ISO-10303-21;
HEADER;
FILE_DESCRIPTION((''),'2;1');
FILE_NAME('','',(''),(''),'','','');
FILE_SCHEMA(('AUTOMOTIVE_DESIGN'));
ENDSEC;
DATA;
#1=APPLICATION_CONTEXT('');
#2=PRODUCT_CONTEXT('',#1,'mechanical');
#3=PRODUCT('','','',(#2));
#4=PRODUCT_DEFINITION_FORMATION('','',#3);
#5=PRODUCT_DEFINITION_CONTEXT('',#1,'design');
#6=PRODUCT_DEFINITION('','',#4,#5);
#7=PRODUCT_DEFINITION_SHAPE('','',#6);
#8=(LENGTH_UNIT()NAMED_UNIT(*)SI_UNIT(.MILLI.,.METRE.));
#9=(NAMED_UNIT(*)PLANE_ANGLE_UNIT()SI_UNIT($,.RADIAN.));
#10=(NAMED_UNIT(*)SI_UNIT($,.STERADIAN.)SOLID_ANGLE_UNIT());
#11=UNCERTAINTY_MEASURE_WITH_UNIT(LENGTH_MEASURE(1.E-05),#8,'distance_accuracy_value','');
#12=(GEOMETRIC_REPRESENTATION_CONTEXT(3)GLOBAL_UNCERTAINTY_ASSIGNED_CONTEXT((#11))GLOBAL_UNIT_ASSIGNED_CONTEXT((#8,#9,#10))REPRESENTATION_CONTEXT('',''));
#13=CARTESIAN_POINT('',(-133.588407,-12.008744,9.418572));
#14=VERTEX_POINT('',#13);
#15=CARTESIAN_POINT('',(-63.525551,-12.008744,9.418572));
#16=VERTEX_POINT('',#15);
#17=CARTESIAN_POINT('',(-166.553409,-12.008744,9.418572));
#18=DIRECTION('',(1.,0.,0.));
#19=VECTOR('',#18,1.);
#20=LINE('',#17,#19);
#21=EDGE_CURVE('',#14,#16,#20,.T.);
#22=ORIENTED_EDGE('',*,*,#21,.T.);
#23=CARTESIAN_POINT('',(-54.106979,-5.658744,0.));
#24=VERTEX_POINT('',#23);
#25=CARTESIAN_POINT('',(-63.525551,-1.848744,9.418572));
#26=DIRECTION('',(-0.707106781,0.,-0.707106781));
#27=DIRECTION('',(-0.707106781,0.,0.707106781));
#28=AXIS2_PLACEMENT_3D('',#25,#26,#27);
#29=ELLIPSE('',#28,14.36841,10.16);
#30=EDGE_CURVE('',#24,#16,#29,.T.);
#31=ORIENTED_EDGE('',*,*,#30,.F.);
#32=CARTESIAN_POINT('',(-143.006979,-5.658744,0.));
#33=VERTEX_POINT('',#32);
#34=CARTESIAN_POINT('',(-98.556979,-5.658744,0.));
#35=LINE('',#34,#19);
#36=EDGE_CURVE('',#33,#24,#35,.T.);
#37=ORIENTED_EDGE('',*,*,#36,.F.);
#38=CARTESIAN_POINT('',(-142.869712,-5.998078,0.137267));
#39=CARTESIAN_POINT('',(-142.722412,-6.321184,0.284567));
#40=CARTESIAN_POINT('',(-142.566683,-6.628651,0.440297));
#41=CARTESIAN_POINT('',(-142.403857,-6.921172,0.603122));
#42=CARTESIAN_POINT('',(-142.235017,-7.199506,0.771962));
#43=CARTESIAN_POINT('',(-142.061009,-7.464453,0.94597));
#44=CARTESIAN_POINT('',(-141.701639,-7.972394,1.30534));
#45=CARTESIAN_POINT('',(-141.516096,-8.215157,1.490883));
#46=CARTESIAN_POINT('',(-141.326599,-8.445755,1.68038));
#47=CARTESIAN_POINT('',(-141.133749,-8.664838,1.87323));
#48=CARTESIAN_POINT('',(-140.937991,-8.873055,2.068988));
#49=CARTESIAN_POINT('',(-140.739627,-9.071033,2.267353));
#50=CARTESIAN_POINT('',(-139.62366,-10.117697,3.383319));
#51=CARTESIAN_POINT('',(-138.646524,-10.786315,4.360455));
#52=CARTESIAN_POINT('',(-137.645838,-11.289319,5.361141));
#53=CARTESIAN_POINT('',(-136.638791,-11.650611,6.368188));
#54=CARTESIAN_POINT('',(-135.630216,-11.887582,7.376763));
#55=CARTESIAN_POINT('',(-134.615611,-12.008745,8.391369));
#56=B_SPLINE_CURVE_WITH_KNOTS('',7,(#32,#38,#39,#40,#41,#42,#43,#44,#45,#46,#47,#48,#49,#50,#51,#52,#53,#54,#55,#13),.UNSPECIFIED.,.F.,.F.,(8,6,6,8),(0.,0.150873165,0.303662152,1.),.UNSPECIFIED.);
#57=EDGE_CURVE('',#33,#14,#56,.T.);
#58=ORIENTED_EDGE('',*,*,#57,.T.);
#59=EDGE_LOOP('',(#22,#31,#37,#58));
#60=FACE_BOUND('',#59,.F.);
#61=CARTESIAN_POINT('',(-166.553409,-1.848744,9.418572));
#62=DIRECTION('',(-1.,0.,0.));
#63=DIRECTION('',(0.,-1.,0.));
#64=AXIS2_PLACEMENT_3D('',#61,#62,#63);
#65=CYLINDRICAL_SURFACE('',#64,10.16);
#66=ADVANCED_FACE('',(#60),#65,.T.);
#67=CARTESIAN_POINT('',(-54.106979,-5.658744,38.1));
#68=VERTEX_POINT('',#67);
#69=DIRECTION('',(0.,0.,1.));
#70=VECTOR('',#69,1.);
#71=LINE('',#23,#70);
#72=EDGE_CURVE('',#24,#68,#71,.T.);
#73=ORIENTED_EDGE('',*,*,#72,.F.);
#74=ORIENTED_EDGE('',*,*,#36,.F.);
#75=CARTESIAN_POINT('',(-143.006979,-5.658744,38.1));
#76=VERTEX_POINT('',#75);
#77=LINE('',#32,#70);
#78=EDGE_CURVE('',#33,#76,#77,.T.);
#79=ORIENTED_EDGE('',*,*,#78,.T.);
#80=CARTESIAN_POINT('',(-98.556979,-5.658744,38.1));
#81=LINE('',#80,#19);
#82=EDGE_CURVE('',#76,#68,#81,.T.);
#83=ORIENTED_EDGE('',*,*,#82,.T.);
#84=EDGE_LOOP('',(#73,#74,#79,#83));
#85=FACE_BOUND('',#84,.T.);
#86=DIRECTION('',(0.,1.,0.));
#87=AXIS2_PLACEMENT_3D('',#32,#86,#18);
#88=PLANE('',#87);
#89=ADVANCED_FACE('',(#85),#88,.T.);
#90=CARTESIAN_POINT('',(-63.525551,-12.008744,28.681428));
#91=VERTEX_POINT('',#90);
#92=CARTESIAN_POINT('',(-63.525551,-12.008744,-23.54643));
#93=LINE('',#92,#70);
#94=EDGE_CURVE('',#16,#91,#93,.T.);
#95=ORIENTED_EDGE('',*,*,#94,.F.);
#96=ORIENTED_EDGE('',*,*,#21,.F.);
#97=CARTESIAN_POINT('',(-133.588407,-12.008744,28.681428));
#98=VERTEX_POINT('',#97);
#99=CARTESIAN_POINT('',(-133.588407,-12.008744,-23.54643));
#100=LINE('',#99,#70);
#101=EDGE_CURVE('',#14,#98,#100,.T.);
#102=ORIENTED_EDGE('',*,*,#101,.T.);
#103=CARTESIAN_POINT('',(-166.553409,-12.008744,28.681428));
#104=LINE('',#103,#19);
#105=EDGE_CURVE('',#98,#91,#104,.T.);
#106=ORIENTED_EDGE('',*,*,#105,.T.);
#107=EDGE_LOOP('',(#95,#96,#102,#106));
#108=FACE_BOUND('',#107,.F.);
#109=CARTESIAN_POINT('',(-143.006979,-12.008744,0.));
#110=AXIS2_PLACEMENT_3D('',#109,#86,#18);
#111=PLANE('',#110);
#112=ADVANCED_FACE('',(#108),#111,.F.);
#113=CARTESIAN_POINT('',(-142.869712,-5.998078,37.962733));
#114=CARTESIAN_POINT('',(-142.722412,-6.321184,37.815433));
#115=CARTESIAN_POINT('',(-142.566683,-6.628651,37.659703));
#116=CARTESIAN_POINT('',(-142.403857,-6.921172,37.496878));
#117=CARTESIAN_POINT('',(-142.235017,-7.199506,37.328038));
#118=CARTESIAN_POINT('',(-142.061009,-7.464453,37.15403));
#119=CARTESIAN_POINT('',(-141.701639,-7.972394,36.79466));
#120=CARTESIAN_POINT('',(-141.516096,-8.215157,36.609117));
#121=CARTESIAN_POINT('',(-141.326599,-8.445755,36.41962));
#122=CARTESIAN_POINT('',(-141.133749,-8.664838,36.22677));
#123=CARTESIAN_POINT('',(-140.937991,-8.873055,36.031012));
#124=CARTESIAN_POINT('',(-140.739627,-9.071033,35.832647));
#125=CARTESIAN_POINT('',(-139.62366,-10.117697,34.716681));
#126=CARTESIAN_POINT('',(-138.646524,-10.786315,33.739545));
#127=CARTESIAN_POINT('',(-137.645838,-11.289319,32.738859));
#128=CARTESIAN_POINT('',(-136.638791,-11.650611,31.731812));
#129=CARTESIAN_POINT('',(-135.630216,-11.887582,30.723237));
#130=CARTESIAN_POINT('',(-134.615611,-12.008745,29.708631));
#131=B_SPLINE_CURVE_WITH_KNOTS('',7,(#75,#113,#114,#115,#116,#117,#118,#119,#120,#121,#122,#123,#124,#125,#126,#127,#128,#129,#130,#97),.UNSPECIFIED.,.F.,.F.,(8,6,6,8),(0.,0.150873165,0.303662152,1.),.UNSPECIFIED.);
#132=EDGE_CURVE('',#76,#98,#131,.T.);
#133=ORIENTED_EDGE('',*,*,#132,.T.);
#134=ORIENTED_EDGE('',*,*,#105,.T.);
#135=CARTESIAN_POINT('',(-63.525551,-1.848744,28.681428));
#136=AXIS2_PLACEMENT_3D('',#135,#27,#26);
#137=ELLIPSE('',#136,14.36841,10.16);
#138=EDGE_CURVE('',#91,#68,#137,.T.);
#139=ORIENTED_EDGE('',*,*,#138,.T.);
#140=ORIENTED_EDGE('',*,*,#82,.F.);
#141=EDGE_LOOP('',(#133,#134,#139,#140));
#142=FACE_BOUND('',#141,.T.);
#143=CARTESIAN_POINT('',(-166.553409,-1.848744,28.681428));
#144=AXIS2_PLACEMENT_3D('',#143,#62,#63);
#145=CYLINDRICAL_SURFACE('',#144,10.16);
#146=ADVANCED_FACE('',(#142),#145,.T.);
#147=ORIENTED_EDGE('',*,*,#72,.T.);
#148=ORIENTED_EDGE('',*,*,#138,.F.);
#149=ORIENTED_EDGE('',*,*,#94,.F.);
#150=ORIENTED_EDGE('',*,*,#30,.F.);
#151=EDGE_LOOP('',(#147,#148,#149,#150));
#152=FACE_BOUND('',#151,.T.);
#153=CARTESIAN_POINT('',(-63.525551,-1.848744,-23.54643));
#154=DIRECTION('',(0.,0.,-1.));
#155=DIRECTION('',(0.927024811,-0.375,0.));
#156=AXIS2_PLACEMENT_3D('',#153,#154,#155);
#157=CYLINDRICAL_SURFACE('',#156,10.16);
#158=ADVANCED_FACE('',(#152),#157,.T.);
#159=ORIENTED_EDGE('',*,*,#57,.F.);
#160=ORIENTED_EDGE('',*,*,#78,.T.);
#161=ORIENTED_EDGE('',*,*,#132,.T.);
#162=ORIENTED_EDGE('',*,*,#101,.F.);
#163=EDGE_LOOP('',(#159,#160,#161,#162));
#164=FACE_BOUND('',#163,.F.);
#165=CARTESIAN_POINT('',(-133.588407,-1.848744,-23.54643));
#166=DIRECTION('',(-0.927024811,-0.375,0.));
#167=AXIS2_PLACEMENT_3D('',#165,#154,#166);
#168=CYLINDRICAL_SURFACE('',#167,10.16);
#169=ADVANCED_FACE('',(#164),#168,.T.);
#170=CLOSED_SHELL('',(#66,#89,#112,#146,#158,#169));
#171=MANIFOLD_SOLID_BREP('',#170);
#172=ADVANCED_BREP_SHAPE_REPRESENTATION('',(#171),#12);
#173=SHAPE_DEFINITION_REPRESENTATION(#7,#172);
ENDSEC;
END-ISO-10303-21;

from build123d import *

# Parameters (mm, degrees)
F0_W        = 88.9
F0_H        = 6.35
F1_DEPTH    = 38.1
F2_T1_DEPTH = 135.9928603931
F2_T3_DEPTH = 85.1928603931


# Not quite as in the source:
# - a fillet or chamfer that OpenCascade refuses, or shapes differently, is made with other operations: its cross-section is extruded or revolved along the edge and cut away or added


with BuildPart() as f1:
    # F0 (on Top) → F1 (new body)
    with BuildSketch(Plane.XY):
        with Locations((-98.556979218, -8.8337444547)):
            Rectangle(F0_W, F0_H)
    extrude(amount=F1_DEPTH)

    # F2: fillet of radius 10.16 on 4 edges, made by hand

    # F2_s2 → F2_t1 (cut)
    with BuildSketch(Plane.YZ.offset(-166.5534094146)):
        with BuildLine():
            ThreePointArc((-12.0087444547, 28.6814279214), (-10.2729714222, 34.3610405842), (-5.6587444547, 38.1))
            Line((-5.6587444547, 38.1), (-12.0087444547, 38.1))
            Line((-12.0087444547, 38.1), (-12.0087444547, 28.6814279214))
        make_face()
        with BuildLine():
            ThreePointArc((-12.0087444547, 9.4185720786), (-10.2729714222, 3.7389594158), (-5.6587444547, 0))
            Line((-5.6587444547, 0), (-12.0087444547, 0))
            Line((-12.0087444547, 0), (-12.0087444547, 9.4185720786))
        make_face()
    extrude(amount=F2_T1_DEPTH, mode=Mode.SUBTRACT)

    # F2_s4 → F2_t3 (cut)
    with BuildSketch(Plane.XY.offset(-23.5464301965)):
        with BuildLine():
            ThreePointArc((-54.106979218, -5.6587444547), (-57.8459386338, -10.2729714222), (-63.5255512967, -12.0087444547))
            Line((-63.5255512967, -12.0087444547), (-54.106979218, -12.0087444547))
            Line((-54.106979218, -12.0087444547), (-54.106979218, -5.6587444547))
        make_face()
        with BuildLine():
            ThreePointArc((-143.006979218, -5.6587444547), (-139.2680198023, -10.2729714222), (-133.5884071394, -12.0087444547))
            Line((-133.5884071394, -12.0087444547), (-143.006979218, -12.0087444547))
            Line((-143.006979218, -12.0087444547), (-143.006979218, -5.6587444547))
        make_face()
    extrude(amount=F2_T3_DEPTH, mode=Mode.SUBTRACT)


solid = f1.part
